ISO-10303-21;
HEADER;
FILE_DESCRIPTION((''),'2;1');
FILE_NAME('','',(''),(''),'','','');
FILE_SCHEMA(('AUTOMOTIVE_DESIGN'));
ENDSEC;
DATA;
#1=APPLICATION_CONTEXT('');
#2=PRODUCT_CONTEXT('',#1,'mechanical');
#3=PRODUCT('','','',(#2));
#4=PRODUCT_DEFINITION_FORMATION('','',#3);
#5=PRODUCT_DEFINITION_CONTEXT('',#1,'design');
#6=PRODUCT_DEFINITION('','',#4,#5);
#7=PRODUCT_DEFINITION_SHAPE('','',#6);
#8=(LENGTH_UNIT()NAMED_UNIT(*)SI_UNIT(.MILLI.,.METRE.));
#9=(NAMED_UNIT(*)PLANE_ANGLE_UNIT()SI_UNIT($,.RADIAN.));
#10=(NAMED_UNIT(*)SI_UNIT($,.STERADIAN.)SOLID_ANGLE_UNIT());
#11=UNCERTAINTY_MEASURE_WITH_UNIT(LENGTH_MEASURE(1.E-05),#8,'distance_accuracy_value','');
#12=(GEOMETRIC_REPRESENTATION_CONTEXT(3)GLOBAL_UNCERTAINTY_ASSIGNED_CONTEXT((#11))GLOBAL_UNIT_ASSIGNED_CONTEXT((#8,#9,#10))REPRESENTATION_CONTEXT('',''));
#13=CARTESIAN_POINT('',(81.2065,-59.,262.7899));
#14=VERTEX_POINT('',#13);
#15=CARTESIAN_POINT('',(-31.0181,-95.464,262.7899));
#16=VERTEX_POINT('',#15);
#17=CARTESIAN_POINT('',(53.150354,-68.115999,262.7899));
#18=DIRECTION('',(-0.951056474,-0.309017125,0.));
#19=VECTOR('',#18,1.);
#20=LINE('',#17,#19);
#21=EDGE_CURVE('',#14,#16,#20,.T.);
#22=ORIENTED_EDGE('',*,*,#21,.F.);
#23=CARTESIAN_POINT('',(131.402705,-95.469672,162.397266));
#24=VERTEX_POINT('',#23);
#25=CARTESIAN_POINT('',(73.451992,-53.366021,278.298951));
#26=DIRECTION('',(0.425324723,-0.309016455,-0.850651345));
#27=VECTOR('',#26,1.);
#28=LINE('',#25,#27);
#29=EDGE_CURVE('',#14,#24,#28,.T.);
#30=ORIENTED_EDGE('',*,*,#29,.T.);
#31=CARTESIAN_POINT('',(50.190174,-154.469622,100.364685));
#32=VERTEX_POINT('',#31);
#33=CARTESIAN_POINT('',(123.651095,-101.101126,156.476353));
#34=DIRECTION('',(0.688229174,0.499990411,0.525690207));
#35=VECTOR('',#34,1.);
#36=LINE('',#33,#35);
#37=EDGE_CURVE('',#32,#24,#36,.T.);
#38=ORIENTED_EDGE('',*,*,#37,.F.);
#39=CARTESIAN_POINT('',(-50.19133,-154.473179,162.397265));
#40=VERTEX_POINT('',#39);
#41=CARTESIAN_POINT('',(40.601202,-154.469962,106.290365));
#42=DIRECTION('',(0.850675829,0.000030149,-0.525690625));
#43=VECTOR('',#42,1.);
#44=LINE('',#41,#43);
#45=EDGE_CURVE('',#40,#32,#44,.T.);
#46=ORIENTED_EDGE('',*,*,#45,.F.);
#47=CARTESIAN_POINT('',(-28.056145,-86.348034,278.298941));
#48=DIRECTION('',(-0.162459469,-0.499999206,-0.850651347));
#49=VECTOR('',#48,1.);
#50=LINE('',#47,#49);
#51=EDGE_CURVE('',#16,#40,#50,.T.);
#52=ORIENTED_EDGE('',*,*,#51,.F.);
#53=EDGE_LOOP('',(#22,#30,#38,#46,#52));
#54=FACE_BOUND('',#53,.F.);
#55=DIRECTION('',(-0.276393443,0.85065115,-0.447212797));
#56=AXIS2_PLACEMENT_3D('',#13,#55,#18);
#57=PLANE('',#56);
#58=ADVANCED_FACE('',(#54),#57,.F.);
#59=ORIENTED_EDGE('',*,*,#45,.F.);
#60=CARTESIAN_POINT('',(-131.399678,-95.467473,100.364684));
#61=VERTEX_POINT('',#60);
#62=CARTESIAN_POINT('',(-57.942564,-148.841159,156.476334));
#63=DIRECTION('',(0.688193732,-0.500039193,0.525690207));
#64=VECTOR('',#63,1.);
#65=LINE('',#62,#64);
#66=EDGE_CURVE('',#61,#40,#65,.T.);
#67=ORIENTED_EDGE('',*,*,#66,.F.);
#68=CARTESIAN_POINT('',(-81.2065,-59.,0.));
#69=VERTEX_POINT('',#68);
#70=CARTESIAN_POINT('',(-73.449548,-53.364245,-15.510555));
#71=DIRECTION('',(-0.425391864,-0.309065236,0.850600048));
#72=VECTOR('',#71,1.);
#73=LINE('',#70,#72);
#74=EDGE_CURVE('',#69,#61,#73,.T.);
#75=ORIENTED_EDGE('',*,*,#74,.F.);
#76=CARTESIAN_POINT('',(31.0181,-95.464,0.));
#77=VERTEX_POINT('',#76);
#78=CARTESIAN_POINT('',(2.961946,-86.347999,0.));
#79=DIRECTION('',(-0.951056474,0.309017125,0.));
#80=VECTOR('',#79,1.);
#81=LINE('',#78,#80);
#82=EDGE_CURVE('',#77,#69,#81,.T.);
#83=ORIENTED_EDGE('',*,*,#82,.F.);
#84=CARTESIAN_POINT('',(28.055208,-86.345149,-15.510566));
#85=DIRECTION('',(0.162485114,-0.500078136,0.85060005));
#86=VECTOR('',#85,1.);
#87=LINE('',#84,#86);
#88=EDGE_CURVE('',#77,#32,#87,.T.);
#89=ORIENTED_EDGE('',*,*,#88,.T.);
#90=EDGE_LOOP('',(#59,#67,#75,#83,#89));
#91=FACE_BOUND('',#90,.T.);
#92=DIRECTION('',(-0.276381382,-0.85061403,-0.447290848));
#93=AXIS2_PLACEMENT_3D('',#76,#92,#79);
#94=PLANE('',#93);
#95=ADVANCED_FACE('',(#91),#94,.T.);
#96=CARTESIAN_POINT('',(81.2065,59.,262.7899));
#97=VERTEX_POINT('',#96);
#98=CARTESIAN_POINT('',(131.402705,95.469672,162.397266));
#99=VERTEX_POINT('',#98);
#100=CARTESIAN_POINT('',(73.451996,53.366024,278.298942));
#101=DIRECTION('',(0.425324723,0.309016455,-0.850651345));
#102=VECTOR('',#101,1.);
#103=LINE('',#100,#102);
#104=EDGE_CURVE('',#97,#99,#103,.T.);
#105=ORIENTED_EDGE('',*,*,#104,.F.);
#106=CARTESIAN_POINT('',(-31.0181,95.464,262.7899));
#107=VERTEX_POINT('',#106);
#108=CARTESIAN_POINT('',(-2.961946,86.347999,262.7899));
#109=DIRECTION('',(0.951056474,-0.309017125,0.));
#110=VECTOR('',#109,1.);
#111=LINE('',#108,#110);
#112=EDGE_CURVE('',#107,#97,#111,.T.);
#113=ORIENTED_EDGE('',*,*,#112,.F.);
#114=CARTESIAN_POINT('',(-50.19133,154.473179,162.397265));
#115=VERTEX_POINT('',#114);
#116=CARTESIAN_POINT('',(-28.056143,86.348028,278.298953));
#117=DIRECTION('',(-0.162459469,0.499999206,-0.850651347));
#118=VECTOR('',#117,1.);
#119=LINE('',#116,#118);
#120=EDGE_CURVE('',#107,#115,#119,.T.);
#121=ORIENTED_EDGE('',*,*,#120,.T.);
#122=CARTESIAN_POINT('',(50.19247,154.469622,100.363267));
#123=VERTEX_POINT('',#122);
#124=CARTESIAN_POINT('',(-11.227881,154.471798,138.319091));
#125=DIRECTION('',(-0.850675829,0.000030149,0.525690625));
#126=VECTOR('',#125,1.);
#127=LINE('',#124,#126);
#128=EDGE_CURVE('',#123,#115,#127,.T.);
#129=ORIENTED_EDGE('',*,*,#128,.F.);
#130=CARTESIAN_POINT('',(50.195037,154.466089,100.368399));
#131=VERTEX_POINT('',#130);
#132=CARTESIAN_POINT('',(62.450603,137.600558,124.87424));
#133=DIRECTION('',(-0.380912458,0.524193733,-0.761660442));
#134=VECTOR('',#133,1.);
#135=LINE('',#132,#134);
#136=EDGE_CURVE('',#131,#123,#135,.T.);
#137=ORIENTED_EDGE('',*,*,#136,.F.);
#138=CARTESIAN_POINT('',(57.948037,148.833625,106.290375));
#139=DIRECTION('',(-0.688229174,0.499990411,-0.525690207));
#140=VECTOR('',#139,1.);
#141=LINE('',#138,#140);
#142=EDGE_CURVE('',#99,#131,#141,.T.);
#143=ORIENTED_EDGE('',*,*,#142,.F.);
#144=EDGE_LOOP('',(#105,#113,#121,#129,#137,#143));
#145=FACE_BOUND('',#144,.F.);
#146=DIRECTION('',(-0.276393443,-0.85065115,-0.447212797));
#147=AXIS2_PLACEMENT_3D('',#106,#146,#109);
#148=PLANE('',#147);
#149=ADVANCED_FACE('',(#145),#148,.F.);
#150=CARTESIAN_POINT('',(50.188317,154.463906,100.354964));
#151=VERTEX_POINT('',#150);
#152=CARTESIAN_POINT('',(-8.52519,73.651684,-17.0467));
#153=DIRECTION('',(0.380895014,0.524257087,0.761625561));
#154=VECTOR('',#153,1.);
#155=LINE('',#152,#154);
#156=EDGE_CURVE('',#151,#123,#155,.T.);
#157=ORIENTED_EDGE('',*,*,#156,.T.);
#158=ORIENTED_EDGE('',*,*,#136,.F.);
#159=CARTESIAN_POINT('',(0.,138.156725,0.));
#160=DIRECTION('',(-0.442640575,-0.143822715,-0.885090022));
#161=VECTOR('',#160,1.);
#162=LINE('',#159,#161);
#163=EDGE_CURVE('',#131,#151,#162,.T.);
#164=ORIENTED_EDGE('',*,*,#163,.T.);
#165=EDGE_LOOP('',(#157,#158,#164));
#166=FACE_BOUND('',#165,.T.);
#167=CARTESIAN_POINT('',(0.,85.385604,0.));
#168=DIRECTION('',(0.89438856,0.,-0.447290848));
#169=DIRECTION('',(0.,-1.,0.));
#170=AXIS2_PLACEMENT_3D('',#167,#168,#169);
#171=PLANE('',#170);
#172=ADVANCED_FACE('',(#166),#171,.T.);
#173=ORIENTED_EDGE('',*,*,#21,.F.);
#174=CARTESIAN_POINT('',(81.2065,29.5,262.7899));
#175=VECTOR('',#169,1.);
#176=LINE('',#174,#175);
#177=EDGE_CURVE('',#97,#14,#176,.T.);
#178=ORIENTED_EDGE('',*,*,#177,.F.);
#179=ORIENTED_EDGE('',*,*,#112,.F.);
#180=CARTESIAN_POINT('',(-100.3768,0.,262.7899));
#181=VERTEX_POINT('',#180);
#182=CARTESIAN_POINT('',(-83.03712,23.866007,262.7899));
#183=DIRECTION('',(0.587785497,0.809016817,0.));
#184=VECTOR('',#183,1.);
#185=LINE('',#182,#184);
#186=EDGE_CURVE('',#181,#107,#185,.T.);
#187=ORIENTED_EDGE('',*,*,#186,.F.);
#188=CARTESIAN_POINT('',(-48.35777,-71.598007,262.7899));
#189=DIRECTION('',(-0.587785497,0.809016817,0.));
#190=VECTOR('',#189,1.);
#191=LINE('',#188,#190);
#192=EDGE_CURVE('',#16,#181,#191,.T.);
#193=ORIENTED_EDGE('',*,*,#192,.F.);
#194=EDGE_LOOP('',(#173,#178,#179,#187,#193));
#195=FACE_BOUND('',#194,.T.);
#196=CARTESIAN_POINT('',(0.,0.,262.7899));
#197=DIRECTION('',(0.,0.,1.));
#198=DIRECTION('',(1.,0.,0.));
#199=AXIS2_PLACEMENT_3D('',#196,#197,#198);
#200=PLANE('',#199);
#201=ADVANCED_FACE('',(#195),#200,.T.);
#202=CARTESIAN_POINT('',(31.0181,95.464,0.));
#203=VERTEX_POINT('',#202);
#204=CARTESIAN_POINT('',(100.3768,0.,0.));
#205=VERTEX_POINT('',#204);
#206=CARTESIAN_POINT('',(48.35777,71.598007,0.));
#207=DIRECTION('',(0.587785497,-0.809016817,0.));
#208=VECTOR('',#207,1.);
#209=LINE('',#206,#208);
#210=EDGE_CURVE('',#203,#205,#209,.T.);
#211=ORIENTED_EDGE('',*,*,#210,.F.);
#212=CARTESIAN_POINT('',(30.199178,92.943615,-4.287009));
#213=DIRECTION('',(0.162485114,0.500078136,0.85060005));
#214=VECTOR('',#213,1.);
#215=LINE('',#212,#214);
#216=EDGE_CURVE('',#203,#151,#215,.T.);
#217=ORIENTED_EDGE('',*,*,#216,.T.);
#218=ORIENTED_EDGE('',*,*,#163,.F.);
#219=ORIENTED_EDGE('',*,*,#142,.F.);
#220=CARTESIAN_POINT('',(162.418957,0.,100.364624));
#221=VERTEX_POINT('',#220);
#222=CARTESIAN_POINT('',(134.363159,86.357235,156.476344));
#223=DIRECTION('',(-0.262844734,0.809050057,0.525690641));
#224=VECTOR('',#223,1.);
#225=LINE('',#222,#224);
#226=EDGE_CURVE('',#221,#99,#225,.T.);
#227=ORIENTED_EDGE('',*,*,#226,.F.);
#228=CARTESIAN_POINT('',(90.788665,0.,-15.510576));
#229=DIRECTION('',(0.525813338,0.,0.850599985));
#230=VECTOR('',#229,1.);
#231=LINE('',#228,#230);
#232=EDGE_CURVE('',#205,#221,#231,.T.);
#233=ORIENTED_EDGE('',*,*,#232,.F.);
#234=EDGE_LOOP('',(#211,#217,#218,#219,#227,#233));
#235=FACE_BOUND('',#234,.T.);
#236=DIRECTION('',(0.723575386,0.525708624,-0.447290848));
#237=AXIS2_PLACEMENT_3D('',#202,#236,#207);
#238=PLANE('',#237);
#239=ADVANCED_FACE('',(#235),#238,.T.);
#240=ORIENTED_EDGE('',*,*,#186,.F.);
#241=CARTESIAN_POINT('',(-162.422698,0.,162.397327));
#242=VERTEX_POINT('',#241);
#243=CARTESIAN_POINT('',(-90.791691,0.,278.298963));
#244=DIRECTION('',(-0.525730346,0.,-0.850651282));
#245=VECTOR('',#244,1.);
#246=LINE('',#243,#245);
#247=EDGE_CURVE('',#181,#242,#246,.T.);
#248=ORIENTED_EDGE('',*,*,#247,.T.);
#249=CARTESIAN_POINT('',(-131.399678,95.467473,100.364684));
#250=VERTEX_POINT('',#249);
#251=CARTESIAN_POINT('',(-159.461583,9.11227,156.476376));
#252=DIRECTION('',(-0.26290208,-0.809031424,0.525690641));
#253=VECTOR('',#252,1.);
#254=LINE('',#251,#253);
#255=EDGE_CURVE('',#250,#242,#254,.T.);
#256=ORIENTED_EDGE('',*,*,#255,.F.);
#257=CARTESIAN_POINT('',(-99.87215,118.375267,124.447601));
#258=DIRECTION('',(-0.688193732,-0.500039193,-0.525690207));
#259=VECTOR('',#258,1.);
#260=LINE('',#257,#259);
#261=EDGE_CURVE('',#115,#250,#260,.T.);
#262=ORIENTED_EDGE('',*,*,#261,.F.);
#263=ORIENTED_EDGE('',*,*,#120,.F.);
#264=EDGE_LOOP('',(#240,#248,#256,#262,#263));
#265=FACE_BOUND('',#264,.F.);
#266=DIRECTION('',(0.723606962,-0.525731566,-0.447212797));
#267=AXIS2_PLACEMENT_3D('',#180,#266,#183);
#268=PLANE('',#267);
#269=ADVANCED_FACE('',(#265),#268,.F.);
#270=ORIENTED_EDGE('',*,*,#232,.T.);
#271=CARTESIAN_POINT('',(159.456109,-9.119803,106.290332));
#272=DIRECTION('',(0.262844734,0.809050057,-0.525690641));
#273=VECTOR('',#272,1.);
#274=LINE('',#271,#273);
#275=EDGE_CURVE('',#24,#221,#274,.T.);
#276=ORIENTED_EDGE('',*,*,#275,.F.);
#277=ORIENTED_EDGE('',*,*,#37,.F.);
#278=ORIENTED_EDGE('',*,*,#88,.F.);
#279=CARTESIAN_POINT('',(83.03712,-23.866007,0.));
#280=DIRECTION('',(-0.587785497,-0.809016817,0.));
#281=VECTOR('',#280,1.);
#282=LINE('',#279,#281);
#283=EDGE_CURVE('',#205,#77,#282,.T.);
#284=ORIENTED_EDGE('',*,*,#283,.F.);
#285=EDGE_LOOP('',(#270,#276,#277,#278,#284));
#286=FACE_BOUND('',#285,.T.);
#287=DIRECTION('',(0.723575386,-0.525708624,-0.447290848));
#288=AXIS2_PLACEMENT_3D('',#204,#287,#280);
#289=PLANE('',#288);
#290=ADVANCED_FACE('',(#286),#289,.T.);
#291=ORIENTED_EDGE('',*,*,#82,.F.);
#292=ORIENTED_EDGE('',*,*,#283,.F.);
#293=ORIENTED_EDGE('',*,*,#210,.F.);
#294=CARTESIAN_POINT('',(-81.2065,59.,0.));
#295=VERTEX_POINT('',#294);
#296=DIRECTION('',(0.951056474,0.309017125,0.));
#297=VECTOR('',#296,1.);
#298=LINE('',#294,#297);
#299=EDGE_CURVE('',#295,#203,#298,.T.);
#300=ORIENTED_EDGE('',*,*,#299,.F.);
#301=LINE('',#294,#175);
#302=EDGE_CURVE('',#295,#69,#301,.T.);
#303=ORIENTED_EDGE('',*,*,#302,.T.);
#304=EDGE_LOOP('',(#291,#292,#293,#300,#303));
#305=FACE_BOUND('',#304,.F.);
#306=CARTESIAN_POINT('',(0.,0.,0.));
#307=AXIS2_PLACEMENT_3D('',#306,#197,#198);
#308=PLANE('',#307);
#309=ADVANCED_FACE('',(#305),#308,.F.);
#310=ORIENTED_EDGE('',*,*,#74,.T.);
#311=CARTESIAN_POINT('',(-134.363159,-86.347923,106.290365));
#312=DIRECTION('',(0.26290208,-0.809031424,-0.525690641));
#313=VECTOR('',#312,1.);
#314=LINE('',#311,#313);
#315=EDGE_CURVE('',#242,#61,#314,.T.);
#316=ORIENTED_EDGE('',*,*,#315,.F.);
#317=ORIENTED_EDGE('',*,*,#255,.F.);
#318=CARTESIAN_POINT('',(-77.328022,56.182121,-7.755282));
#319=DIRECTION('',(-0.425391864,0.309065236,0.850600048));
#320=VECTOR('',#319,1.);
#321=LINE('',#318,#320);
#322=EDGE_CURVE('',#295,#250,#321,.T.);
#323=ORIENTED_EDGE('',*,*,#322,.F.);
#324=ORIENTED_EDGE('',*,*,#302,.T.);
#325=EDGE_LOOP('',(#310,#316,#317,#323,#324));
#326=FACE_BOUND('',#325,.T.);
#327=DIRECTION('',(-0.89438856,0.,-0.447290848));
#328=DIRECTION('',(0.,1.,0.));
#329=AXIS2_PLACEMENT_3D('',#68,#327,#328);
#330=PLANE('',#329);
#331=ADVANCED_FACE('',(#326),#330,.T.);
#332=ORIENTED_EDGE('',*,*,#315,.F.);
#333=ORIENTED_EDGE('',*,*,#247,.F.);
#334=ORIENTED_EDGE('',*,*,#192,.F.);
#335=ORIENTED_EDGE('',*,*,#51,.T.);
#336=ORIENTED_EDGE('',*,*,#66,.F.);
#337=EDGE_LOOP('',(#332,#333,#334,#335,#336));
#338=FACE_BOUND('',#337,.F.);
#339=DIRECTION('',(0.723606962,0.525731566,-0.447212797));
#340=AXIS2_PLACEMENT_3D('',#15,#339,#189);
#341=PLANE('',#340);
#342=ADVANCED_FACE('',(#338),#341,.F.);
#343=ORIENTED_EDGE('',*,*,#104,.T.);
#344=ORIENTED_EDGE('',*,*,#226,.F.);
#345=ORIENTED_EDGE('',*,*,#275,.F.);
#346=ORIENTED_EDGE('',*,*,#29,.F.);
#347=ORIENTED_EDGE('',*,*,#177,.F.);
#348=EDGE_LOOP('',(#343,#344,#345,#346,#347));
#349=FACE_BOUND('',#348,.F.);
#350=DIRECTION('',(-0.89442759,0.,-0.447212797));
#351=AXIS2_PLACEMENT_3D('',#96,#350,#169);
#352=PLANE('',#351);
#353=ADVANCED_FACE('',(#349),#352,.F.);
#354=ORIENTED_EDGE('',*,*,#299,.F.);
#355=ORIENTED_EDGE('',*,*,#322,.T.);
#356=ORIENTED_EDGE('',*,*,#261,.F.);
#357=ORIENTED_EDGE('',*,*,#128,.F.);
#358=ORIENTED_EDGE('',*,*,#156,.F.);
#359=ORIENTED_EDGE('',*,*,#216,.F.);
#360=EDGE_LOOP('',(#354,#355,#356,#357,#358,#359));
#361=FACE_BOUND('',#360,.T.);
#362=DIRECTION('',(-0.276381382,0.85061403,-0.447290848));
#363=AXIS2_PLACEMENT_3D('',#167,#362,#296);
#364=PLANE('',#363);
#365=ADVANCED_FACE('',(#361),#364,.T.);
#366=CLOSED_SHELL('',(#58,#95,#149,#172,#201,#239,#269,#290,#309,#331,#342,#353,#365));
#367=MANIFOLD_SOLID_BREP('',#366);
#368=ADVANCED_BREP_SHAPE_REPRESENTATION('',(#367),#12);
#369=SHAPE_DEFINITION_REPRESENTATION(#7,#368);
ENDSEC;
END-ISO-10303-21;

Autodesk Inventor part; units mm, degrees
ref_plane "YZ Plane" through (0, 0, 0) normal (1, 0, 0) x (0, 1, 0)
ref_plane "XZ Plane" through (0, 0, 0) normal (0, 1, 0) x (-1, 0, 0)
ref_plane "XY Plane" through (0, 0, 0) normal (0, 0, 1) x (1, 0, 0)
sketch "Boceto2" plane through (0, 0, 0) normal (0, 0, 1) x (1, 0, 0)
  line L0 (-81.2065, -59) -> (-81.2065, 59)
  line L1 (-81.2065, 59) -> (31.0181, 95.464)
  line L2 (31.0181, 95.464) -> (100.3768, 0)
  line L3 (100.3768, 0) -> (31.0181, -95.464)
  line L4 (31.0181, -95.464) -> (-81.2065, -59)
  line L5 (0, 0) -> (-162.4131, 0)
  line L6 (-162.4131, 0) -> (-162.4131, 162.4131)
  line L7 (-162.4131, 162.4131) -> (0, 162.4131)
  line L8 (0, 162.4131) -> (0, 0)
  line L9 (-162.4131, 162.4131) -> (-81.2065, 0)
  dimension "d3" = 118
  dimension "d4" = 262.7899
  dimension "d5" = 26.565
extrude "Extrusión1" add sketch "Boceto2" along normal blind 262.7899 draft 26.57 contours L0 L5 L8 L1 L2 L3 L4 | L0 L1 L8 L5
sketch "Boceto3" plane through (0, 0, 262.7899) normal (0, 0, 1) x (1, 0, 0)
  line L0 (-31.0181, 95.464) -> (81.2065, 59)
  line L1 (81.2065, 59) -> (81.2065, -59)
  line L2 (81.2065, -59) -> (-31.0181, -95.464)
  line L3 (-31.0181, -95.464) -> (-100.3768, 0)
  line L4 (-100.3768, 0) -> (-31.0181, 95.464)
  point P0 (0, 0)
  point P1 (0, 0)
  dimension "d8" = 118
extrude "Extrusión2" cut sketch "Boceto3" against normal blind 262.7899 draft 26.565 keep common part
ref_plane "Plano de trabajo1" through (-131.3998, -95.4675, 100.3648) normal (0.4910723, 0.3567849, 0.7947028) x (0.8506859, 0.0000184, -0.5256744)
feature "Dividir1" [suppressed]
ref_plane "Plano de trabajo2" through (31.0181, -95.464, 0) normal (-0.4910723, -0.3567849, -0.7947028) x (-0.8506859, -0.0000184, 0.5256744)
ref_plane "Plano de trabajo3" through (31.0181, -95.464, 0) normal (0.2628656, 0.809017, -0.5257311) x (-0.9510565, 0.309017, 0)
ref_plane "Plano de trabajo4" through (-81.2065, -59, 0) normal (-0.5877853, 0.809017, 0) x (-0.4253919, -0.3090653, 0.8506)
ref_plane "Plano de trabajo5" through (-81.2065, -59, 0) normal (0.8506508, 0, -0.5257311) x (0, 1, 0)
equation "\"d6\" = d4"
equation "\"d9\" = d4"
equation "\"d10\" = d5"
properties part number "Dodecaedro"
